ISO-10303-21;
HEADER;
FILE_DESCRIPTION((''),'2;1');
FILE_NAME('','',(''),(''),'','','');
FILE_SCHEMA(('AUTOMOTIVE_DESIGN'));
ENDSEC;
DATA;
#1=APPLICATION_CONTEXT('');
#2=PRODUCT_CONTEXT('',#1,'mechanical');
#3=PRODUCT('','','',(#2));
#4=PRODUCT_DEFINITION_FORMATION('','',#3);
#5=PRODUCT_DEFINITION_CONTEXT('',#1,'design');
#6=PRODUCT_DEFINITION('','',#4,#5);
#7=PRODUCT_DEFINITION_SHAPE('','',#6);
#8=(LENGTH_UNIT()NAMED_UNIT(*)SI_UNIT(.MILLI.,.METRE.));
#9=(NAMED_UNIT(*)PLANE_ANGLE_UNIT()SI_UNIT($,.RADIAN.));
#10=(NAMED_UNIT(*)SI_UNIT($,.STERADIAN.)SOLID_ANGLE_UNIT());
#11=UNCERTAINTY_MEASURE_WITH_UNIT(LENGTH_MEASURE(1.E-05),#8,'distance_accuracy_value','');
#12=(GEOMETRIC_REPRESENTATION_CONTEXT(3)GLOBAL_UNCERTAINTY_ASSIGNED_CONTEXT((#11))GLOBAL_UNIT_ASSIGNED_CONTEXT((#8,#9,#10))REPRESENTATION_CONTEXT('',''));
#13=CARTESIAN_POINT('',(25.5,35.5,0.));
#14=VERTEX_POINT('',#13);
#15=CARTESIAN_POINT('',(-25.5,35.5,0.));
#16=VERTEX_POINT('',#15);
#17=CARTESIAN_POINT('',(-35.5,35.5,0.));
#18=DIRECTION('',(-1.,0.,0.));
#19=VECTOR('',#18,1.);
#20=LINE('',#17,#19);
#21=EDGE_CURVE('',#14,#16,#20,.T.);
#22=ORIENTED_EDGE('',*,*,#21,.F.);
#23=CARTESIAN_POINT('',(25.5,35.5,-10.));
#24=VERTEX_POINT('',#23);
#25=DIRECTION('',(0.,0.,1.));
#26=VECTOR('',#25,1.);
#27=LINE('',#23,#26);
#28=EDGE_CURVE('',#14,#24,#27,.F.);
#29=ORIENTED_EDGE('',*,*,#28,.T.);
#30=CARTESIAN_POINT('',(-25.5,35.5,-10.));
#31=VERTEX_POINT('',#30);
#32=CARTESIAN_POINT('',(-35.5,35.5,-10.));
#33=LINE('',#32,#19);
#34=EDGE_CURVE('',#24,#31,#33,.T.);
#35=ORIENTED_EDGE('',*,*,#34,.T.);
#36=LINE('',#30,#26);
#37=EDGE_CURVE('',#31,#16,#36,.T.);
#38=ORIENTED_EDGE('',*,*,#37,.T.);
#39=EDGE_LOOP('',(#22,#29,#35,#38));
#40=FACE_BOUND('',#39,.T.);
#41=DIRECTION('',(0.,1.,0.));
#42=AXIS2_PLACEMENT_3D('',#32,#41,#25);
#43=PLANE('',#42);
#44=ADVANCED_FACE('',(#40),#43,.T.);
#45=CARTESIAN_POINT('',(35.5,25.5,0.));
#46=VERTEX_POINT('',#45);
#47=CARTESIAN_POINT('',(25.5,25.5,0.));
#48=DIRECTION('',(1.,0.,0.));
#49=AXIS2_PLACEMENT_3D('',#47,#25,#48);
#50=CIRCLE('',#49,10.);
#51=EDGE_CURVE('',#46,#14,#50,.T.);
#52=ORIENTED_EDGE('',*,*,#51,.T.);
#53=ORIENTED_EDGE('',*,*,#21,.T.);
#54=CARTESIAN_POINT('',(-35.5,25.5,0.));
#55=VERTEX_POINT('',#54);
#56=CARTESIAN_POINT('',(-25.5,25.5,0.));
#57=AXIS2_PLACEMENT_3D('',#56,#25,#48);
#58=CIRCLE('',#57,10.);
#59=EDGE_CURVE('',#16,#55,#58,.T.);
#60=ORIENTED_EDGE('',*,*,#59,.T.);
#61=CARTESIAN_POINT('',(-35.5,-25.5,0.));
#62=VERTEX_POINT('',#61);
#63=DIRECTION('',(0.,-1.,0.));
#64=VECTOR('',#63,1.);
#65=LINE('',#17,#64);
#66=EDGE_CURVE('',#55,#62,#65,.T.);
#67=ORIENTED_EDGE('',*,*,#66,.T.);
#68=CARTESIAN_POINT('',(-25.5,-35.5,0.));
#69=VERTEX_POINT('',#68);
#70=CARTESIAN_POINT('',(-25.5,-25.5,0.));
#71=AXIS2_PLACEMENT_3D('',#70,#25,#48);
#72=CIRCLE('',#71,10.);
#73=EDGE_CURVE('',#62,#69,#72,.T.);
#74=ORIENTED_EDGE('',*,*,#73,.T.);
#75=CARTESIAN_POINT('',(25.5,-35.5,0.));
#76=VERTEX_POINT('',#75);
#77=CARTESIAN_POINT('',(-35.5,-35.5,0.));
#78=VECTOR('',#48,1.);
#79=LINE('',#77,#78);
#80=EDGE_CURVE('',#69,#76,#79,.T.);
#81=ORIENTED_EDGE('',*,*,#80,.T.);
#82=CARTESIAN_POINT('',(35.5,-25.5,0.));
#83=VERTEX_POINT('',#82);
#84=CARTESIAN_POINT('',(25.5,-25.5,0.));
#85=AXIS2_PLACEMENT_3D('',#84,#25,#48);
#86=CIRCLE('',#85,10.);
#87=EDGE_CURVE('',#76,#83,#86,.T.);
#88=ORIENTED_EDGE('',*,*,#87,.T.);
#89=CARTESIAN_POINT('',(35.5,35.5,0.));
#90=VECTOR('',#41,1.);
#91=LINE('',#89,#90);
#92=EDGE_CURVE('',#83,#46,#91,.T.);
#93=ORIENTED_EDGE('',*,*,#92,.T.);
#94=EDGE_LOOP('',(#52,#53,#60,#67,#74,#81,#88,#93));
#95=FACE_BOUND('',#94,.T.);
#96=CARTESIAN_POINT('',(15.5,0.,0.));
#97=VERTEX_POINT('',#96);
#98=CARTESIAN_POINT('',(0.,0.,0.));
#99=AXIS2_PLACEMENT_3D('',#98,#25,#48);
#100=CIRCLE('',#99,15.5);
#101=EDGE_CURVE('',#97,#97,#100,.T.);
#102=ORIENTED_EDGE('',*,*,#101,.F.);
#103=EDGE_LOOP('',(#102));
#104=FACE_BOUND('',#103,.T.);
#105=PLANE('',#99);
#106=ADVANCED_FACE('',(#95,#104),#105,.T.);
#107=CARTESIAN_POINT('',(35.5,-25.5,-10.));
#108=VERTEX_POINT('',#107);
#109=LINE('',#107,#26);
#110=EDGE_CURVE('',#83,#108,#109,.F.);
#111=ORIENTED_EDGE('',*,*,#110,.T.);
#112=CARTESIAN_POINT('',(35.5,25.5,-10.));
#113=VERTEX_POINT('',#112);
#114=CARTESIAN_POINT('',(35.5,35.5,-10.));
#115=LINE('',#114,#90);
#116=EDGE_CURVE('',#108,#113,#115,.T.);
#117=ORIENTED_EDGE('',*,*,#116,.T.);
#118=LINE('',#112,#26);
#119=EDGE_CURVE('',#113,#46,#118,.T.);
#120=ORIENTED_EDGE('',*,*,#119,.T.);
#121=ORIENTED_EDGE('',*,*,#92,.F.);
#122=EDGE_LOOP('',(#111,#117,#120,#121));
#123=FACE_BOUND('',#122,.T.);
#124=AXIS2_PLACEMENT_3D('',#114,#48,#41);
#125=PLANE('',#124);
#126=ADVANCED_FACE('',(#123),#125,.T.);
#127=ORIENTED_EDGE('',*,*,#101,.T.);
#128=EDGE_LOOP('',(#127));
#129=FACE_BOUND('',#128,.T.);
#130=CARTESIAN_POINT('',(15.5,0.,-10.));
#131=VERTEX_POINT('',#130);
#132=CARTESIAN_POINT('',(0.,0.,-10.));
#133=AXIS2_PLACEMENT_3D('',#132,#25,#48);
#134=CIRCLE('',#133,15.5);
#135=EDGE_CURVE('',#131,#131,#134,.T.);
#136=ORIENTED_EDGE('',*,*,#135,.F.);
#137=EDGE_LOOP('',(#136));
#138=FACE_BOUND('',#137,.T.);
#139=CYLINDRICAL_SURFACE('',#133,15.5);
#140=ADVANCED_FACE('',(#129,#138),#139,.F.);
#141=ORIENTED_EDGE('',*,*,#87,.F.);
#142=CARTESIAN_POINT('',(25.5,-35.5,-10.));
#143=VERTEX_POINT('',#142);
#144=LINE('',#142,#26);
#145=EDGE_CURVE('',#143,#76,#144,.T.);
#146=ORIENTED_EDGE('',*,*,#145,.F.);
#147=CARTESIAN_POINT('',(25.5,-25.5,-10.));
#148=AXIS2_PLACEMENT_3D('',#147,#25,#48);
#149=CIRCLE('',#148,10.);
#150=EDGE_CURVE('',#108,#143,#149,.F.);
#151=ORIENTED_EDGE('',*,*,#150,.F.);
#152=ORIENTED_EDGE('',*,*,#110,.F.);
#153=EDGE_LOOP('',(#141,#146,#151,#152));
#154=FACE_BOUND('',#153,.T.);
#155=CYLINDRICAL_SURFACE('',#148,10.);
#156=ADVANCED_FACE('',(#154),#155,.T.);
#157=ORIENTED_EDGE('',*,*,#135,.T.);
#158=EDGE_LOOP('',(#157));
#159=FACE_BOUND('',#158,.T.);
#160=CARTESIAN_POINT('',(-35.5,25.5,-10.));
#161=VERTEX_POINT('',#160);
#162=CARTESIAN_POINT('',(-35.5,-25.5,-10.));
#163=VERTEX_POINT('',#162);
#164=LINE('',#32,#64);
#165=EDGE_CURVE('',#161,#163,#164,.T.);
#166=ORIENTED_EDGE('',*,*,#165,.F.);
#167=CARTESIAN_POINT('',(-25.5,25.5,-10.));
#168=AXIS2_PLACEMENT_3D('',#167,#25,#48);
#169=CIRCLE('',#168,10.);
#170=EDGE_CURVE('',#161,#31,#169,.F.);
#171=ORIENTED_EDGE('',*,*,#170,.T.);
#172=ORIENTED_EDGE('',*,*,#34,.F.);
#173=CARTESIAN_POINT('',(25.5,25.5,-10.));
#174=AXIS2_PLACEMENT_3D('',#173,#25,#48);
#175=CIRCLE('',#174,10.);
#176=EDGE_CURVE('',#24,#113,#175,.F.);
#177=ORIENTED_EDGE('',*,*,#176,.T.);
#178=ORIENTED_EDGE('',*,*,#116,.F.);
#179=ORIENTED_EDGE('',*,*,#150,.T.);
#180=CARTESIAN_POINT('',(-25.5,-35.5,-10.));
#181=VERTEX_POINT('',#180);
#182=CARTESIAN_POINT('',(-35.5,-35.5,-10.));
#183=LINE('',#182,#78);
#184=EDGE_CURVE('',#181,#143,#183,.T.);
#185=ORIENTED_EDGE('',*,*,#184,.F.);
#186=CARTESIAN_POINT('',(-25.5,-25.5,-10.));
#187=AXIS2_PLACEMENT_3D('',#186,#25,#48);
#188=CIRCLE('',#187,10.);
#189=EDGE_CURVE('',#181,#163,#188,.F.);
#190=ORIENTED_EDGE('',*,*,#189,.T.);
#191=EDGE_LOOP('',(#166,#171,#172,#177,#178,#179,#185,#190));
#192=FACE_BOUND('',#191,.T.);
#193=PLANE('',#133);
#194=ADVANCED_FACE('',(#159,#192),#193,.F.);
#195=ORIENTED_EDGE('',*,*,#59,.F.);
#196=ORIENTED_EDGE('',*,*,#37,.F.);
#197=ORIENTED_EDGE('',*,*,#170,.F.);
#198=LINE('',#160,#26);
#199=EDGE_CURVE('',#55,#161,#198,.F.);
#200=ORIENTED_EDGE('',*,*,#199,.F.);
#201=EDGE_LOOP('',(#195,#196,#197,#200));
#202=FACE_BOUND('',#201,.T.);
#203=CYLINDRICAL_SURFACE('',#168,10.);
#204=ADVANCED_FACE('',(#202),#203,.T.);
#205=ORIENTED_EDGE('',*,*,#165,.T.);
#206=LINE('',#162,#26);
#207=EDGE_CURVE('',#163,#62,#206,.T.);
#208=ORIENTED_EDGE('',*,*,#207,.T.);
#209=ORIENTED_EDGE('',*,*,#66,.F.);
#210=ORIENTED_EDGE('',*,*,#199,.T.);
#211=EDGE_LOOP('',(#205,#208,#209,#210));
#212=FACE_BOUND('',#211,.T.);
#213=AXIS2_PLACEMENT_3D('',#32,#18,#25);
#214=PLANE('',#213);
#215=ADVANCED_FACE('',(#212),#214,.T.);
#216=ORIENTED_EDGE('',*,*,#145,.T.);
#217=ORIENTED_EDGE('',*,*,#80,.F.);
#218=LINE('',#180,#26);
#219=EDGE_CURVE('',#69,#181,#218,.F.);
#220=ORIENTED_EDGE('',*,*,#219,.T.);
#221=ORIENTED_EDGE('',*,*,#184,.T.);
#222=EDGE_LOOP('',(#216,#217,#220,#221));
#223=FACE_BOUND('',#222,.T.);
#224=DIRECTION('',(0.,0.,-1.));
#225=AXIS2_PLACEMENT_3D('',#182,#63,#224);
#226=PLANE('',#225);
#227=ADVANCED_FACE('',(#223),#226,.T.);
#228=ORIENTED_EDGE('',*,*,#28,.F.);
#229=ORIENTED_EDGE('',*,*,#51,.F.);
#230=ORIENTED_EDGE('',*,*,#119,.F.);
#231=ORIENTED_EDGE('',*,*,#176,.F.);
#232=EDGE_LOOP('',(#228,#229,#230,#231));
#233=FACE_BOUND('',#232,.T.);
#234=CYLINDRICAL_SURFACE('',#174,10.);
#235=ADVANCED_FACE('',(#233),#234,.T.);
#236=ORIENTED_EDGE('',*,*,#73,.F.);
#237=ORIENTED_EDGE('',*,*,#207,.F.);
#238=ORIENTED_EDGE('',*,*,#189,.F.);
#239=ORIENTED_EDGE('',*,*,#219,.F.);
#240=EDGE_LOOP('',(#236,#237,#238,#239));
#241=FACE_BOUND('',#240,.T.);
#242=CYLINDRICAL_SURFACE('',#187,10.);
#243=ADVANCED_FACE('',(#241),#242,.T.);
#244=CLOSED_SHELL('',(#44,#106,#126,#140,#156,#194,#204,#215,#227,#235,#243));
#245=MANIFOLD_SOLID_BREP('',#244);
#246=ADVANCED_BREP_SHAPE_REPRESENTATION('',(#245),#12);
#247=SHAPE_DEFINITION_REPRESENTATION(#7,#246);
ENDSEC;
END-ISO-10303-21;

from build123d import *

# Parameters (mm, degrees)
IZIM1_W            = 71
IZIM1_H            = 71
IZIM1_R            = 15.5
TABAN_FLAN_1_DEPTH = 10
RADYUS1_R          = 10


# Sheet-metal steps are written as plain solids
with BuildPart() as part:
    # Çizim1 → Taban-Flanş1 (new body)
    with BuildSketch(Plane.XY):
        Rectangle(IZIM1_W, IZIM1_H)
        Circle(IZIM1_R, mode=Mode.SUBTRACT)
    extrude(amount=-TABAN_FLAN_1_DEPTH)

    # Radyus1
    radyus1_edges = [part.edges().sort_by_distance(p)[0] for p in [
        (35.5, -35.5, -5),
        (-35.5, -35.5, -5),
        (-35.5, 35.5, -5),
        (35.5, 35.5, -5),
    ]]
    fillet(radyus1_edges, radius=RADYUS1_R)


solid = part.part
